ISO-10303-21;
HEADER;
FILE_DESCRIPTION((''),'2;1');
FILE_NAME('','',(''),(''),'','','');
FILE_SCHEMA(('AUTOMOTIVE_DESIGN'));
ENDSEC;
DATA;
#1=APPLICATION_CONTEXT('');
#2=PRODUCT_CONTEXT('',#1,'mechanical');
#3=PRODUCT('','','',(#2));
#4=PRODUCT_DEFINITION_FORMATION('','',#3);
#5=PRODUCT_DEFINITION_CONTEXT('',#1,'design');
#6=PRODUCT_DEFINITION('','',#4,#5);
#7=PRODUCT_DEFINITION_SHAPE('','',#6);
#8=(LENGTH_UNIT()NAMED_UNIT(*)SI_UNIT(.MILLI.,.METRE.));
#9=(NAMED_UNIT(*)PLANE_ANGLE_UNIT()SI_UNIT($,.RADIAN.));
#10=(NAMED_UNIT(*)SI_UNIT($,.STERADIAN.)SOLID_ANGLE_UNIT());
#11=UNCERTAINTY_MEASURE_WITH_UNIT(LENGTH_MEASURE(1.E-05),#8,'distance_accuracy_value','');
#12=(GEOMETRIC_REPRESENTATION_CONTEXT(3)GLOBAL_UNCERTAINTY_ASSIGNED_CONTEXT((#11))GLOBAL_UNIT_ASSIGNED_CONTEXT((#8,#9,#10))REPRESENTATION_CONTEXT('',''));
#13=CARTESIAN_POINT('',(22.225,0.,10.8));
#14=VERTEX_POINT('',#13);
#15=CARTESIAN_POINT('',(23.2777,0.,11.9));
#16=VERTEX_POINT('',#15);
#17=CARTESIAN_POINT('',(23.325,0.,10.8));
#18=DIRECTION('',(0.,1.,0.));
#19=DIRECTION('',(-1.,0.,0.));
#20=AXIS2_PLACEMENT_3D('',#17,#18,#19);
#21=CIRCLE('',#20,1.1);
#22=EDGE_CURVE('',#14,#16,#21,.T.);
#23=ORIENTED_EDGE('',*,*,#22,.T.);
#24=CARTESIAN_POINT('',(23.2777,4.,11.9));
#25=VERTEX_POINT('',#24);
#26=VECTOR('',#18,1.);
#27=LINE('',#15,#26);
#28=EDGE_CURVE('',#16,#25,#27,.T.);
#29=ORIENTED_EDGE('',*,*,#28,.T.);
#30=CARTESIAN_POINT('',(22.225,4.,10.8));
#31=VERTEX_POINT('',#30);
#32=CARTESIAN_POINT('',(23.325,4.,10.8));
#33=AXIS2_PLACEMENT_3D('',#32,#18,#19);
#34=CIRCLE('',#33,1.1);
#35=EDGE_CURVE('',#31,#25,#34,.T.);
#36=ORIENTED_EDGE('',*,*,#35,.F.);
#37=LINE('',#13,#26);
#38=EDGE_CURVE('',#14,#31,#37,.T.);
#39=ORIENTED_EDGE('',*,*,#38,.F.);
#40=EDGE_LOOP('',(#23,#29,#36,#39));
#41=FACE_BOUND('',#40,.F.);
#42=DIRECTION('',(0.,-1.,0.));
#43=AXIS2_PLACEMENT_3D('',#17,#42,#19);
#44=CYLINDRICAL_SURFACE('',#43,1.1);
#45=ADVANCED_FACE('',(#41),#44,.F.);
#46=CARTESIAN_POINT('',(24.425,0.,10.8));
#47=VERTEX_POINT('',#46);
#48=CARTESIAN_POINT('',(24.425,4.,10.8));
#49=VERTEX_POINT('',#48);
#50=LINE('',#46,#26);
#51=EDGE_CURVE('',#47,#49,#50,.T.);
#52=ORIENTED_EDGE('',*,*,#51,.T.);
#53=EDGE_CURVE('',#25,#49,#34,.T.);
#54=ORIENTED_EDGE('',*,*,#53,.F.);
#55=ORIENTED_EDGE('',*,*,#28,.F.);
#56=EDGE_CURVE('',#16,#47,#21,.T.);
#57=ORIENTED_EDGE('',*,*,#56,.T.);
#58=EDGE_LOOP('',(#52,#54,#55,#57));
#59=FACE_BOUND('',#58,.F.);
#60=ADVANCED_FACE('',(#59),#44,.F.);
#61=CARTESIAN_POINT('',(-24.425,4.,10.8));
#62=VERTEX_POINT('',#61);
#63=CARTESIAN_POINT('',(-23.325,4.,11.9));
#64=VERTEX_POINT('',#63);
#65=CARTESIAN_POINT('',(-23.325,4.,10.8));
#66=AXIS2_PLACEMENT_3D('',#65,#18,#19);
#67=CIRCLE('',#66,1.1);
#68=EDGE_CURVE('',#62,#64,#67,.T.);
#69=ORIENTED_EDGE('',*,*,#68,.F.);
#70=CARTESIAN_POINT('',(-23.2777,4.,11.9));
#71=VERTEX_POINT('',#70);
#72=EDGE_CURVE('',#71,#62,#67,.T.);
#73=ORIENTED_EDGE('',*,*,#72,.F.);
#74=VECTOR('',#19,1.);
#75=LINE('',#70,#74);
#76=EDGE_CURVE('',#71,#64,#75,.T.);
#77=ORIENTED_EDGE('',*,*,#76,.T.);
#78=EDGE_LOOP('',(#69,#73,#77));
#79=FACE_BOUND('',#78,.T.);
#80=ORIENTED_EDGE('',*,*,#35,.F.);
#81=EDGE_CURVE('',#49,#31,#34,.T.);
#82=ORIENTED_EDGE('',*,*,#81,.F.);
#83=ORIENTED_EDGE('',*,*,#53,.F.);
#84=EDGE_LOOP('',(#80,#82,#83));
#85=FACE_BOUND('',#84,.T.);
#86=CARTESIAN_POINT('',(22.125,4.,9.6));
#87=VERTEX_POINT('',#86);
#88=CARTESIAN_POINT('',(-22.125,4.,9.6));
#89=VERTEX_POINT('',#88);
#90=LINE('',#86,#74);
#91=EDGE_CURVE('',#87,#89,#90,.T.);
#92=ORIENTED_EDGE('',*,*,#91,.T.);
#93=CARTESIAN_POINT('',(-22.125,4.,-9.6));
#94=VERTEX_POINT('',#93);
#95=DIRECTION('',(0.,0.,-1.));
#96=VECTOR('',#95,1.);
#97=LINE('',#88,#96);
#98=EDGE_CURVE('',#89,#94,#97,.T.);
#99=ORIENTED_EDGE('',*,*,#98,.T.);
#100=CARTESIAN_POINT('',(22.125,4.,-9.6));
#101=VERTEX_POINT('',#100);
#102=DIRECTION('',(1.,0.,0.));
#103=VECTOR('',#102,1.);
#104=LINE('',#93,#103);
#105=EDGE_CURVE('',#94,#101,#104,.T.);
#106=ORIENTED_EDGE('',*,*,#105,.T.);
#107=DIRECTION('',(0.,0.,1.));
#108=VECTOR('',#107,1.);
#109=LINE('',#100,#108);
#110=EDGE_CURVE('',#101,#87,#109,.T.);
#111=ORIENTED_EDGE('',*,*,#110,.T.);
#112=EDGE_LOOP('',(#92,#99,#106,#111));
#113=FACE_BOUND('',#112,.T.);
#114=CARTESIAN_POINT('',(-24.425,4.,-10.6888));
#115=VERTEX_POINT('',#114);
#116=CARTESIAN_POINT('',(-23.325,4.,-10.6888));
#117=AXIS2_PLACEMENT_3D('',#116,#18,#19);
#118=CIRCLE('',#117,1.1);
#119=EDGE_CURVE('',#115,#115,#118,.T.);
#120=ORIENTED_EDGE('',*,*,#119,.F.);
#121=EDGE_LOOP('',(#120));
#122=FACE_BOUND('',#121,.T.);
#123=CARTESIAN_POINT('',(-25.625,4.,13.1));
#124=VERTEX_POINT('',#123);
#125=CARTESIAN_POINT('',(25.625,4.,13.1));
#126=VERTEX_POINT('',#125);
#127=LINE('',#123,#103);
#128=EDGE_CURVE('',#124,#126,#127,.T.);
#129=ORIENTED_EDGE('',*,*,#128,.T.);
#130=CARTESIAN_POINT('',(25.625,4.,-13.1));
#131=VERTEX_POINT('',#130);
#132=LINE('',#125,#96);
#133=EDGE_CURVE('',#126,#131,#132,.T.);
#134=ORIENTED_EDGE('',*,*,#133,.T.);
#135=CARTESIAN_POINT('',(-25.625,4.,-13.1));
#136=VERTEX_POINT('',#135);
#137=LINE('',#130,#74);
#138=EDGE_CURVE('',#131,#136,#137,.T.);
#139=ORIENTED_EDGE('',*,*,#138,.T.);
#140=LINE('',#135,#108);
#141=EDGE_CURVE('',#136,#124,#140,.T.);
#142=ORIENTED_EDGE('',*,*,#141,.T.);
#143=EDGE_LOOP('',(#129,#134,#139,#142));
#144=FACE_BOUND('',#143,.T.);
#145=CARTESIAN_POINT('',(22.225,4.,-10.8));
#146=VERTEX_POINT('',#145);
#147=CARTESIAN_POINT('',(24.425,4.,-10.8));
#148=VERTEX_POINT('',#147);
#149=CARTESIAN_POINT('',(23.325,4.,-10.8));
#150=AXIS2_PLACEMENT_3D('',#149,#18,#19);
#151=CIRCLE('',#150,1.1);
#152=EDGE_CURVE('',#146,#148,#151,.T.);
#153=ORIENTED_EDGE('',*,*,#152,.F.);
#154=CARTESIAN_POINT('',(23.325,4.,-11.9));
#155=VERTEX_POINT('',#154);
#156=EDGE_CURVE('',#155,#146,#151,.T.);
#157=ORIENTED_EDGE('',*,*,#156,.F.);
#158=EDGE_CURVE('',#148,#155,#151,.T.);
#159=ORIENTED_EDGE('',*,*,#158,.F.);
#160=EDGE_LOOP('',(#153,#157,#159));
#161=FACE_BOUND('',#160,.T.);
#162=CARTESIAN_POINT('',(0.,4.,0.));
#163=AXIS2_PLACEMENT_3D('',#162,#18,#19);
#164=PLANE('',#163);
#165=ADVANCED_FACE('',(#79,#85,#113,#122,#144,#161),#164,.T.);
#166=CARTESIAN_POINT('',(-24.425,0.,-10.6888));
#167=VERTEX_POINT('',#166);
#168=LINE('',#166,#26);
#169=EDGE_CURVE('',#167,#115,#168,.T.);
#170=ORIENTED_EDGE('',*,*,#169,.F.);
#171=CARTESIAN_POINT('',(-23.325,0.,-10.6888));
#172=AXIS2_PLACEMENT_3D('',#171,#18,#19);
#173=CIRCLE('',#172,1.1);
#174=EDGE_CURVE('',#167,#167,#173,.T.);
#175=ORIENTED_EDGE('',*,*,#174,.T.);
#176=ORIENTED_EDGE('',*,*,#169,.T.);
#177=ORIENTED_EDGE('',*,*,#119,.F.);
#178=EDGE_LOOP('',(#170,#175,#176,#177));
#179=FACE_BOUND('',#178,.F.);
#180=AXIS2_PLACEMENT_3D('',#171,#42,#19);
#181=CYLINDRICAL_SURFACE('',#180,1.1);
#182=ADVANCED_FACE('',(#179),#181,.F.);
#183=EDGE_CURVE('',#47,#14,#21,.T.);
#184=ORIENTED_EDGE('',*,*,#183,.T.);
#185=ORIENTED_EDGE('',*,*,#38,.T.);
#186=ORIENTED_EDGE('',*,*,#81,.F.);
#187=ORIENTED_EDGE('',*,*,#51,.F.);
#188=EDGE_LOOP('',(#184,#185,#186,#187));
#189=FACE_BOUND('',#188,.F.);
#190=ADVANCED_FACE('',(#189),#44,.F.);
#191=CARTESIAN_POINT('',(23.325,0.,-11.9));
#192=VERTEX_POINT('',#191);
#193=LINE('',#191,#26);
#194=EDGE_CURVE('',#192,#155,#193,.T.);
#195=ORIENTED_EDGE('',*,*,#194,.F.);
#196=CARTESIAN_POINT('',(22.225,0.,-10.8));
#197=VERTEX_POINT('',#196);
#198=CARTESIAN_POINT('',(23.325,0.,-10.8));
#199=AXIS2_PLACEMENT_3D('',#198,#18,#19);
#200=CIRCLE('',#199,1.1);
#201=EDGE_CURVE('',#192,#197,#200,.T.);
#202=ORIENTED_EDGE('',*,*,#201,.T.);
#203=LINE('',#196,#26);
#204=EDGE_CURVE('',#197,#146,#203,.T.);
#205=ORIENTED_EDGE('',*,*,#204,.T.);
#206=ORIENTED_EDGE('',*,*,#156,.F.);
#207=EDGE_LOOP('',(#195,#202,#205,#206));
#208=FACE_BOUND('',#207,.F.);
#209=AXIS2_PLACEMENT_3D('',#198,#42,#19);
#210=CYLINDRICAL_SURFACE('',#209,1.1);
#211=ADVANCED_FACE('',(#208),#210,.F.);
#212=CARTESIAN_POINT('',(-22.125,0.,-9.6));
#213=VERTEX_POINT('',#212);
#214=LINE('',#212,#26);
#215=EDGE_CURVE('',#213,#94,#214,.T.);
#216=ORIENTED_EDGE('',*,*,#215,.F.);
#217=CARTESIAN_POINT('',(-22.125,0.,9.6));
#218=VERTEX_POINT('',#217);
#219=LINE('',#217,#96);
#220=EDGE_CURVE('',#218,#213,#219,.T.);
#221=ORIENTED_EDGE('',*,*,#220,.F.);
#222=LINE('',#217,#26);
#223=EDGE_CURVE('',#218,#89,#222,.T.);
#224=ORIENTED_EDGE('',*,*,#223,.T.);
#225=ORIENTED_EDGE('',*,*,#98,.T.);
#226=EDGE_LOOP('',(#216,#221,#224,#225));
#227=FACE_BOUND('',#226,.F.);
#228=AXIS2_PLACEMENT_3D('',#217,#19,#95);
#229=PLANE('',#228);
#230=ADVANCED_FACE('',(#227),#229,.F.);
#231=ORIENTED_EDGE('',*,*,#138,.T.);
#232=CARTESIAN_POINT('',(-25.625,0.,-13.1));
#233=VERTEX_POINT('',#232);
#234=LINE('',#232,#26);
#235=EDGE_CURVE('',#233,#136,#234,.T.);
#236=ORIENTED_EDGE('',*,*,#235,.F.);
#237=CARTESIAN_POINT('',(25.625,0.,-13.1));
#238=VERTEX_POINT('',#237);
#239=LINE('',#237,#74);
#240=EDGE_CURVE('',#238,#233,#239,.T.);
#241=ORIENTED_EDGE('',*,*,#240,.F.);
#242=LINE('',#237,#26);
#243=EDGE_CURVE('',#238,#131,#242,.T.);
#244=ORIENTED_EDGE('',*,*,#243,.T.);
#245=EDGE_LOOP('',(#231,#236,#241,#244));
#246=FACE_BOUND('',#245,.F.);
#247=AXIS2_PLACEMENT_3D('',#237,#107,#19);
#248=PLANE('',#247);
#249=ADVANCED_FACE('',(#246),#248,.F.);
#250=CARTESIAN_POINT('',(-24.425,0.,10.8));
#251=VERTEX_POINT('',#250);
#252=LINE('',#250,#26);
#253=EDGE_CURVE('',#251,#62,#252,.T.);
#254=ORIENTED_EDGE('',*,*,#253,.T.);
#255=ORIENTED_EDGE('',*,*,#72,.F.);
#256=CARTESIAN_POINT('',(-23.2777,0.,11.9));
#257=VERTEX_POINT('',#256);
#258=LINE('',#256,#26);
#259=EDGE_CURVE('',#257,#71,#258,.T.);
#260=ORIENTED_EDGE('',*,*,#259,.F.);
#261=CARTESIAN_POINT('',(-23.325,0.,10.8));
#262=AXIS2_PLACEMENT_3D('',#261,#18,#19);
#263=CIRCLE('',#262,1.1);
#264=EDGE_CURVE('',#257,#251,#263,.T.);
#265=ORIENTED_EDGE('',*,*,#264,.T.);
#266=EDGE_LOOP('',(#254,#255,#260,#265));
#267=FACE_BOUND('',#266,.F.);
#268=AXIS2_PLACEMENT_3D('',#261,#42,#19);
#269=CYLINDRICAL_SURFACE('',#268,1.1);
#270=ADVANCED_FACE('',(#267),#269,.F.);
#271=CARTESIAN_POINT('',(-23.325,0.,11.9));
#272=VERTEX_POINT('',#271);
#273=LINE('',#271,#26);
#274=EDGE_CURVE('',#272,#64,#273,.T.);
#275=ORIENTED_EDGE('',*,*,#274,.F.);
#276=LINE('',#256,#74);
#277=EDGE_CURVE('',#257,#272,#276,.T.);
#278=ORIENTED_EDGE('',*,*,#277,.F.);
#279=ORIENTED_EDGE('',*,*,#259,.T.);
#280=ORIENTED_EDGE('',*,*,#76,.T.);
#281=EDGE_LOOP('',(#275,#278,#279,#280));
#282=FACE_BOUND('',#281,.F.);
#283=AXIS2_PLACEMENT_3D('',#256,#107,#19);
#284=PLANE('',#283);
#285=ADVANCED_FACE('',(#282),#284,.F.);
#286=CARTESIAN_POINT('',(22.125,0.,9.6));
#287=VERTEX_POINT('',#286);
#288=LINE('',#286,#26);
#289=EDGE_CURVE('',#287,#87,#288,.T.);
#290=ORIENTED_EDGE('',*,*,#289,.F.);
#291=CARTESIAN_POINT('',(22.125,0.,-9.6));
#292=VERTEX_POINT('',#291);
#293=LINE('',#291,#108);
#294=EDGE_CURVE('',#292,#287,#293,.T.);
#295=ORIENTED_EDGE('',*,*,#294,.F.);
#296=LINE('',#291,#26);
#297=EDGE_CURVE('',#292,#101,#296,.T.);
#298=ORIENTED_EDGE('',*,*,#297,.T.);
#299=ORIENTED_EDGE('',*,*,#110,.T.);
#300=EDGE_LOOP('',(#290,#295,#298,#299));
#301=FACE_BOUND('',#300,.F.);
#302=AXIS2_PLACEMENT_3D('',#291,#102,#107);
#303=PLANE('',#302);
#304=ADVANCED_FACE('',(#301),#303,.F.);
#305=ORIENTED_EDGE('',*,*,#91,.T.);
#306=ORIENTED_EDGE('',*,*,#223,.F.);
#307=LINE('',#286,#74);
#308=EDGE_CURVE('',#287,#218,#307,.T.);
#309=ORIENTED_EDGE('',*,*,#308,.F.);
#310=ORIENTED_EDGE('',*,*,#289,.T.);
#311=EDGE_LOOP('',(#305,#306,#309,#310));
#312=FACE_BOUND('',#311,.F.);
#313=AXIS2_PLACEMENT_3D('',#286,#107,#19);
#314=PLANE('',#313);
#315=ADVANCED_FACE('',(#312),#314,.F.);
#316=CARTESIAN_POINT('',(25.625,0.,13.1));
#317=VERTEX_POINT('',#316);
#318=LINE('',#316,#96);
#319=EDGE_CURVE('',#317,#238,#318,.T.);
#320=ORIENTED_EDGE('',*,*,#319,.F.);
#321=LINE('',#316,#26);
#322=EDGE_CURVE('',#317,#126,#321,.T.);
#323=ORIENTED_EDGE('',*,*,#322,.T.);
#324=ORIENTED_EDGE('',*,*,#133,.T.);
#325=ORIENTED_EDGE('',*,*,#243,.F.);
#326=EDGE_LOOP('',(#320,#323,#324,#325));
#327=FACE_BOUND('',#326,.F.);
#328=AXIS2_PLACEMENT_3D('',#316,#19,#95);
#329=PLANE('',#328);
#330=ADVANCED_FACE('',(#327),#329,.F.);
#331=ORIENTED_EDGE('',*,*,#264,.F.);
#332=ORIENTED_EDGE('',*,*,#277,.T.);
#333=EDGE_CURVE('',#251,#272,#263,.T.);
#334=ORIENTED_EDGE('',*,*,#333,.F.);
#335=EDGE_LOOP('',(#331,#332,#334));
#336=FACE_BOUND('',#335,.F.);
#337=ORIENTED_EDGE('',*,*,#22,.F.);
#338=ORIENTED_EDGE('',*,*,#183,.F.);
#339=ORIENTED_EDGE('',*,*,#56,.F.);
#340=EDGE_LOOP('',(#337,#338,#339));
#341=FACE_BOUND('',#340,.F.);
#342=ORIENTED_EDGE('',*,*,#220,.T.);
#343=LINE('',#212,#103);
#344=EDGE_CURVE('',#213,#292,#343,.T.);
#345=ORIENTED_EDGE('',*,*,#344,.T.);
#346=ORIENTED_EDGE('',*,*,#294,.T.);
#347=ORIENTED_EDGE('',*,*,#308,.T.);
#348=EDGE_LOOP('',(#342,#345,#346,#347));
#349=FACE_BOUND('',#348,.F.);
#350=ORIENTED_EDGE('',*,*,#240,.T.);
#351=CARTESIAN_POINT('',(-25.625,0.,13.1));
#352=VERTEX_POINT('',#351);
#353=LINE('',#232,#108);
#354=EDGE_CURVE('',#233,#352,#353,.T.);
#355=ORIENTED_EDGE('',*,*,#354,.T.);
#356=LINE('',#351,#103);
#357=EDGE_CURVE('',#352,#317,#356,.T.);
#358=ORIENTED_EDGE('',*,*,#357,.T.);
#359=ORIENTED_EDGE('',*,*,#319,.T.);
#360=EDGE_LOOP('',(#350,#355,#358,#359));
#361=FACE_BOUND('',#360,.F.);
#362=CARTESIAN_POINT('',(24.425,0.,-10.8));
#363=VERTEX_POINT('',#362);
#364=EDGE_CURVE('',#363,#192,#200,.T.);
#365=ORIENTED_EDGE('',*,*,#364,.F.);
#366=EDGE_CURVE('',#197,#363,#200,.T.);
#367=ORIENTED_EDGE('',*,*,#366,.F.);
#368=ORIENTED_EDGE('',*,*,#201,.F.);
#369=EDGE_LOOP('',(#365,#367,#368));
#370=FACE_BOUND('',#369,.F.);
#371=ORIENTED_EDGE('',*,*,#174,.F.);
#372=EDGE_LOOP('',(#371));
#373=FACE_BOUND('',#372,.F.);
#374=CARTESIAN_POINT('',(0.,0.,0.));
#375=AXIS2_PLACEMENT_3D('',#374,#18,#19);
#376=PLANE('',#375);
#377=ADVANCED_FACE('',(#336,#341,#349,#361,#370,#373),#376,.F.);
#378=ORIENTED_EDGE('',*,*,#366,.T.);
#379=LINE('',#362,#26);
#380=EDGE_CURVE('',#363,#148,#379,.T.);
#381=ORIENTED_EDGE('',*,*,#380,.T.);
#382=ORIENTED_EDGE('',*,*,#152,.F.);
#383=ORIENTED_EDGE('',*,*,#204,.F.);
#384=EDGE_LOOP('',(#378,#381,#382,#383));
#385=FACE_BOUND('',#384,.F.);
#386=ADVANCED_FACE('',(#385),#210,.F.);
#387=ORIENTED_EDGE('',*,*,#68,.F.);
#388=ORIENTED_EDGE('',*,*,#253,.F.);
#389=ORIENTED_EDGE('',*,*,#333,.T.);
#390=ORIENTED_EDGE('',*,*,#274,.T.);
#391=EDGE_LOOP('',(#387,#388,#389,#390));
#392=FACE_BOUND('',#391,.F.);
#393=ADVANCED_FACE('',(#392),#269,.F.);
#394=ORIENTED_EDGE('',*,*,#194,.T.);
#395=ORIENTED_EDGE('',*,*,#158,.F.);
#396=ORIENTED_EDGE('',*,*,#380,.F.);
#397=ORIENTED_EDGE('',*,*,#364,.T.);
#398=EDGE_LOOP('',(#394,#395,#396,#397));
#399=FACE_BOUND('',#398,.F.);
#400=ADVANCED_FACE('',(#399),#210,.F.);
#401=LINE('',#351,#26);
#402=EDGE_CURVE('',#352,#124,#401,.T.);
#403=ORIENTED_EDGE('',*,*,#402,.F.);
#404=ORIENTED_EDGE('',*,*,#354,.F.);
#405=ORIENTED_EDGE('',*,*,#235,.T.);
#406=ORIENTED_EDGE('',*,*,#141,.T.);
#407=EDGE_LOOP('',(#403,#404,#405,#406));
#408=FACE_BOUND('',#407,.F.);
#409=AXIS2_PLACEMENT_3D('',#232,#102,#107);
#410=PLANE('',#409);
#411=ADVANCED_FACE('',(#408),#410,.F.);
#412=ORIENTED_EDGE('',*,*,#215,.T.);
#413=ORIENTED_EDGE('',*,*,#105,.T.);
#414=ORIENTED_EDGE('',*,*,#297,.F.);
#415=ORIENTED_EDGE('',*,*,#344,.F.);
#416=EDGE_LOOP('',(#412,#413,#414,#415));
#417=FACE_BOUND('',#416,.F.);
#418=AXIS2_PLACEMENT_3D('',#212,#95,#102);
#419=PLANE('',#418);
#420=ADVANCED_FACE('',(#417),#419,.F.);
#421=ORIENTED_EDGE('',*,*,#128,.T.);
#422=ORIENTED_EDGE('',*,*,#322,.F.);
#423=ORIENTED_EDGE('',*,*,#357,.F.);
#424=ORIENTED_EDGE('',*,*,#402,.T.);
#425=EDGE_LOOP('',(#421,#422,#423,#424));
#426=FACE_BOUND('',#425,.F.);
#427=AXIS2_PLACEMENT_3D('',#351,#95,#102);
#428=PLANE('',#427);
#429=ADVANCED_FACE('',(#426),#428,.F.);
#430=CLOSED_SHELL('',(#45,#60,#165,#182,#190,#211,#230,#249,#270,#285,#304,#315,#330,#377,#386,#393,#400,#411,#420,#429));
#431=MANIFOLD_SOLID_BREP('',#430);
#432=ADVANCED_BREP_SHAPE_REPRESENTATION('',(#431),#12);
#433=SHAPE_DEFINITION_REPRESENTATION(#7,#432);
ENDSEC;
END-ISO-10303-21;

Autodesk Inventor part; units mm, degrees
ref_plane "YZ Plane" through (0, 0, 0) normal (1, 0, 0) x (0, 1, 0)
ref_plane "XZ Plane" through (0, 0, 0) normal (0, 1, 0) x (-1, 0, 0)
ref_plane "XY Plane" through (0, 0, 0) normal (0, 0, 1) x (1, 0, 0)
sketch "Boceto1" plane through (0, 0, 0) normal (0, 1, 0) x (-1, 0, 0)
  line L0 (-25.625, -13.1) -> (25.625, -13.1)
  line L1 (25.625, -13.1) -> (25.625, 13.1)
  line L2 (25.625, 13.1) -> (-25.625, 13.1)
  line L3 (-25.625, 13.1) -> (-25.625, -13.1)
  line L4 (-25.625, -13.1) -> (25.625, 13.1) construction
  line L5 (25.625, -13.1) -> (-25.625, 13.1) construction
  line L6 (24.425, -11.9) -> (-24.425, -11.9)
  line L7 (-24.425, -10.8) -> (-24.425, 10.8)
  circle A0 centre (23.325, 10.8) radius 1.1
  circle A1 centre (-23.325, 10.8) radius 1.1
  circle A2 centre (-23.325, -10.8) radius 1.1
  circle A3 centre (23.325, -10.6888) radius 1.1
  line L8 (-24.425, 11.9) -> (-23.2777, 11.9)
  line L9 (23.2777, 11.9) -> (23.325, 11.9)
  line L10 (-22.125, 9.6) -> (22.125, 9.6)
  line L11 (22.125, 9.6) -> (22.125, -9.6)
  line L12 (22.125, -9.6) -> (-22.125, -9.6)
  line L13 (-22.125, -9.6) -> (-22.125, 9.6)
  point P0 (0, 0)
  dimension "d3" = 2.2
  dimension "d4" = 2.2
  dimension "d5" = 2.2
  dimension "d0" = 51.25
  dimension "d1" = 26.2
  dimension "d6" = 2.2
  dimension "d7" = 3.5
extrude "Extrusión1" add sketch "Boceto1" along normal blind 4
properties part number "Buck 2"
